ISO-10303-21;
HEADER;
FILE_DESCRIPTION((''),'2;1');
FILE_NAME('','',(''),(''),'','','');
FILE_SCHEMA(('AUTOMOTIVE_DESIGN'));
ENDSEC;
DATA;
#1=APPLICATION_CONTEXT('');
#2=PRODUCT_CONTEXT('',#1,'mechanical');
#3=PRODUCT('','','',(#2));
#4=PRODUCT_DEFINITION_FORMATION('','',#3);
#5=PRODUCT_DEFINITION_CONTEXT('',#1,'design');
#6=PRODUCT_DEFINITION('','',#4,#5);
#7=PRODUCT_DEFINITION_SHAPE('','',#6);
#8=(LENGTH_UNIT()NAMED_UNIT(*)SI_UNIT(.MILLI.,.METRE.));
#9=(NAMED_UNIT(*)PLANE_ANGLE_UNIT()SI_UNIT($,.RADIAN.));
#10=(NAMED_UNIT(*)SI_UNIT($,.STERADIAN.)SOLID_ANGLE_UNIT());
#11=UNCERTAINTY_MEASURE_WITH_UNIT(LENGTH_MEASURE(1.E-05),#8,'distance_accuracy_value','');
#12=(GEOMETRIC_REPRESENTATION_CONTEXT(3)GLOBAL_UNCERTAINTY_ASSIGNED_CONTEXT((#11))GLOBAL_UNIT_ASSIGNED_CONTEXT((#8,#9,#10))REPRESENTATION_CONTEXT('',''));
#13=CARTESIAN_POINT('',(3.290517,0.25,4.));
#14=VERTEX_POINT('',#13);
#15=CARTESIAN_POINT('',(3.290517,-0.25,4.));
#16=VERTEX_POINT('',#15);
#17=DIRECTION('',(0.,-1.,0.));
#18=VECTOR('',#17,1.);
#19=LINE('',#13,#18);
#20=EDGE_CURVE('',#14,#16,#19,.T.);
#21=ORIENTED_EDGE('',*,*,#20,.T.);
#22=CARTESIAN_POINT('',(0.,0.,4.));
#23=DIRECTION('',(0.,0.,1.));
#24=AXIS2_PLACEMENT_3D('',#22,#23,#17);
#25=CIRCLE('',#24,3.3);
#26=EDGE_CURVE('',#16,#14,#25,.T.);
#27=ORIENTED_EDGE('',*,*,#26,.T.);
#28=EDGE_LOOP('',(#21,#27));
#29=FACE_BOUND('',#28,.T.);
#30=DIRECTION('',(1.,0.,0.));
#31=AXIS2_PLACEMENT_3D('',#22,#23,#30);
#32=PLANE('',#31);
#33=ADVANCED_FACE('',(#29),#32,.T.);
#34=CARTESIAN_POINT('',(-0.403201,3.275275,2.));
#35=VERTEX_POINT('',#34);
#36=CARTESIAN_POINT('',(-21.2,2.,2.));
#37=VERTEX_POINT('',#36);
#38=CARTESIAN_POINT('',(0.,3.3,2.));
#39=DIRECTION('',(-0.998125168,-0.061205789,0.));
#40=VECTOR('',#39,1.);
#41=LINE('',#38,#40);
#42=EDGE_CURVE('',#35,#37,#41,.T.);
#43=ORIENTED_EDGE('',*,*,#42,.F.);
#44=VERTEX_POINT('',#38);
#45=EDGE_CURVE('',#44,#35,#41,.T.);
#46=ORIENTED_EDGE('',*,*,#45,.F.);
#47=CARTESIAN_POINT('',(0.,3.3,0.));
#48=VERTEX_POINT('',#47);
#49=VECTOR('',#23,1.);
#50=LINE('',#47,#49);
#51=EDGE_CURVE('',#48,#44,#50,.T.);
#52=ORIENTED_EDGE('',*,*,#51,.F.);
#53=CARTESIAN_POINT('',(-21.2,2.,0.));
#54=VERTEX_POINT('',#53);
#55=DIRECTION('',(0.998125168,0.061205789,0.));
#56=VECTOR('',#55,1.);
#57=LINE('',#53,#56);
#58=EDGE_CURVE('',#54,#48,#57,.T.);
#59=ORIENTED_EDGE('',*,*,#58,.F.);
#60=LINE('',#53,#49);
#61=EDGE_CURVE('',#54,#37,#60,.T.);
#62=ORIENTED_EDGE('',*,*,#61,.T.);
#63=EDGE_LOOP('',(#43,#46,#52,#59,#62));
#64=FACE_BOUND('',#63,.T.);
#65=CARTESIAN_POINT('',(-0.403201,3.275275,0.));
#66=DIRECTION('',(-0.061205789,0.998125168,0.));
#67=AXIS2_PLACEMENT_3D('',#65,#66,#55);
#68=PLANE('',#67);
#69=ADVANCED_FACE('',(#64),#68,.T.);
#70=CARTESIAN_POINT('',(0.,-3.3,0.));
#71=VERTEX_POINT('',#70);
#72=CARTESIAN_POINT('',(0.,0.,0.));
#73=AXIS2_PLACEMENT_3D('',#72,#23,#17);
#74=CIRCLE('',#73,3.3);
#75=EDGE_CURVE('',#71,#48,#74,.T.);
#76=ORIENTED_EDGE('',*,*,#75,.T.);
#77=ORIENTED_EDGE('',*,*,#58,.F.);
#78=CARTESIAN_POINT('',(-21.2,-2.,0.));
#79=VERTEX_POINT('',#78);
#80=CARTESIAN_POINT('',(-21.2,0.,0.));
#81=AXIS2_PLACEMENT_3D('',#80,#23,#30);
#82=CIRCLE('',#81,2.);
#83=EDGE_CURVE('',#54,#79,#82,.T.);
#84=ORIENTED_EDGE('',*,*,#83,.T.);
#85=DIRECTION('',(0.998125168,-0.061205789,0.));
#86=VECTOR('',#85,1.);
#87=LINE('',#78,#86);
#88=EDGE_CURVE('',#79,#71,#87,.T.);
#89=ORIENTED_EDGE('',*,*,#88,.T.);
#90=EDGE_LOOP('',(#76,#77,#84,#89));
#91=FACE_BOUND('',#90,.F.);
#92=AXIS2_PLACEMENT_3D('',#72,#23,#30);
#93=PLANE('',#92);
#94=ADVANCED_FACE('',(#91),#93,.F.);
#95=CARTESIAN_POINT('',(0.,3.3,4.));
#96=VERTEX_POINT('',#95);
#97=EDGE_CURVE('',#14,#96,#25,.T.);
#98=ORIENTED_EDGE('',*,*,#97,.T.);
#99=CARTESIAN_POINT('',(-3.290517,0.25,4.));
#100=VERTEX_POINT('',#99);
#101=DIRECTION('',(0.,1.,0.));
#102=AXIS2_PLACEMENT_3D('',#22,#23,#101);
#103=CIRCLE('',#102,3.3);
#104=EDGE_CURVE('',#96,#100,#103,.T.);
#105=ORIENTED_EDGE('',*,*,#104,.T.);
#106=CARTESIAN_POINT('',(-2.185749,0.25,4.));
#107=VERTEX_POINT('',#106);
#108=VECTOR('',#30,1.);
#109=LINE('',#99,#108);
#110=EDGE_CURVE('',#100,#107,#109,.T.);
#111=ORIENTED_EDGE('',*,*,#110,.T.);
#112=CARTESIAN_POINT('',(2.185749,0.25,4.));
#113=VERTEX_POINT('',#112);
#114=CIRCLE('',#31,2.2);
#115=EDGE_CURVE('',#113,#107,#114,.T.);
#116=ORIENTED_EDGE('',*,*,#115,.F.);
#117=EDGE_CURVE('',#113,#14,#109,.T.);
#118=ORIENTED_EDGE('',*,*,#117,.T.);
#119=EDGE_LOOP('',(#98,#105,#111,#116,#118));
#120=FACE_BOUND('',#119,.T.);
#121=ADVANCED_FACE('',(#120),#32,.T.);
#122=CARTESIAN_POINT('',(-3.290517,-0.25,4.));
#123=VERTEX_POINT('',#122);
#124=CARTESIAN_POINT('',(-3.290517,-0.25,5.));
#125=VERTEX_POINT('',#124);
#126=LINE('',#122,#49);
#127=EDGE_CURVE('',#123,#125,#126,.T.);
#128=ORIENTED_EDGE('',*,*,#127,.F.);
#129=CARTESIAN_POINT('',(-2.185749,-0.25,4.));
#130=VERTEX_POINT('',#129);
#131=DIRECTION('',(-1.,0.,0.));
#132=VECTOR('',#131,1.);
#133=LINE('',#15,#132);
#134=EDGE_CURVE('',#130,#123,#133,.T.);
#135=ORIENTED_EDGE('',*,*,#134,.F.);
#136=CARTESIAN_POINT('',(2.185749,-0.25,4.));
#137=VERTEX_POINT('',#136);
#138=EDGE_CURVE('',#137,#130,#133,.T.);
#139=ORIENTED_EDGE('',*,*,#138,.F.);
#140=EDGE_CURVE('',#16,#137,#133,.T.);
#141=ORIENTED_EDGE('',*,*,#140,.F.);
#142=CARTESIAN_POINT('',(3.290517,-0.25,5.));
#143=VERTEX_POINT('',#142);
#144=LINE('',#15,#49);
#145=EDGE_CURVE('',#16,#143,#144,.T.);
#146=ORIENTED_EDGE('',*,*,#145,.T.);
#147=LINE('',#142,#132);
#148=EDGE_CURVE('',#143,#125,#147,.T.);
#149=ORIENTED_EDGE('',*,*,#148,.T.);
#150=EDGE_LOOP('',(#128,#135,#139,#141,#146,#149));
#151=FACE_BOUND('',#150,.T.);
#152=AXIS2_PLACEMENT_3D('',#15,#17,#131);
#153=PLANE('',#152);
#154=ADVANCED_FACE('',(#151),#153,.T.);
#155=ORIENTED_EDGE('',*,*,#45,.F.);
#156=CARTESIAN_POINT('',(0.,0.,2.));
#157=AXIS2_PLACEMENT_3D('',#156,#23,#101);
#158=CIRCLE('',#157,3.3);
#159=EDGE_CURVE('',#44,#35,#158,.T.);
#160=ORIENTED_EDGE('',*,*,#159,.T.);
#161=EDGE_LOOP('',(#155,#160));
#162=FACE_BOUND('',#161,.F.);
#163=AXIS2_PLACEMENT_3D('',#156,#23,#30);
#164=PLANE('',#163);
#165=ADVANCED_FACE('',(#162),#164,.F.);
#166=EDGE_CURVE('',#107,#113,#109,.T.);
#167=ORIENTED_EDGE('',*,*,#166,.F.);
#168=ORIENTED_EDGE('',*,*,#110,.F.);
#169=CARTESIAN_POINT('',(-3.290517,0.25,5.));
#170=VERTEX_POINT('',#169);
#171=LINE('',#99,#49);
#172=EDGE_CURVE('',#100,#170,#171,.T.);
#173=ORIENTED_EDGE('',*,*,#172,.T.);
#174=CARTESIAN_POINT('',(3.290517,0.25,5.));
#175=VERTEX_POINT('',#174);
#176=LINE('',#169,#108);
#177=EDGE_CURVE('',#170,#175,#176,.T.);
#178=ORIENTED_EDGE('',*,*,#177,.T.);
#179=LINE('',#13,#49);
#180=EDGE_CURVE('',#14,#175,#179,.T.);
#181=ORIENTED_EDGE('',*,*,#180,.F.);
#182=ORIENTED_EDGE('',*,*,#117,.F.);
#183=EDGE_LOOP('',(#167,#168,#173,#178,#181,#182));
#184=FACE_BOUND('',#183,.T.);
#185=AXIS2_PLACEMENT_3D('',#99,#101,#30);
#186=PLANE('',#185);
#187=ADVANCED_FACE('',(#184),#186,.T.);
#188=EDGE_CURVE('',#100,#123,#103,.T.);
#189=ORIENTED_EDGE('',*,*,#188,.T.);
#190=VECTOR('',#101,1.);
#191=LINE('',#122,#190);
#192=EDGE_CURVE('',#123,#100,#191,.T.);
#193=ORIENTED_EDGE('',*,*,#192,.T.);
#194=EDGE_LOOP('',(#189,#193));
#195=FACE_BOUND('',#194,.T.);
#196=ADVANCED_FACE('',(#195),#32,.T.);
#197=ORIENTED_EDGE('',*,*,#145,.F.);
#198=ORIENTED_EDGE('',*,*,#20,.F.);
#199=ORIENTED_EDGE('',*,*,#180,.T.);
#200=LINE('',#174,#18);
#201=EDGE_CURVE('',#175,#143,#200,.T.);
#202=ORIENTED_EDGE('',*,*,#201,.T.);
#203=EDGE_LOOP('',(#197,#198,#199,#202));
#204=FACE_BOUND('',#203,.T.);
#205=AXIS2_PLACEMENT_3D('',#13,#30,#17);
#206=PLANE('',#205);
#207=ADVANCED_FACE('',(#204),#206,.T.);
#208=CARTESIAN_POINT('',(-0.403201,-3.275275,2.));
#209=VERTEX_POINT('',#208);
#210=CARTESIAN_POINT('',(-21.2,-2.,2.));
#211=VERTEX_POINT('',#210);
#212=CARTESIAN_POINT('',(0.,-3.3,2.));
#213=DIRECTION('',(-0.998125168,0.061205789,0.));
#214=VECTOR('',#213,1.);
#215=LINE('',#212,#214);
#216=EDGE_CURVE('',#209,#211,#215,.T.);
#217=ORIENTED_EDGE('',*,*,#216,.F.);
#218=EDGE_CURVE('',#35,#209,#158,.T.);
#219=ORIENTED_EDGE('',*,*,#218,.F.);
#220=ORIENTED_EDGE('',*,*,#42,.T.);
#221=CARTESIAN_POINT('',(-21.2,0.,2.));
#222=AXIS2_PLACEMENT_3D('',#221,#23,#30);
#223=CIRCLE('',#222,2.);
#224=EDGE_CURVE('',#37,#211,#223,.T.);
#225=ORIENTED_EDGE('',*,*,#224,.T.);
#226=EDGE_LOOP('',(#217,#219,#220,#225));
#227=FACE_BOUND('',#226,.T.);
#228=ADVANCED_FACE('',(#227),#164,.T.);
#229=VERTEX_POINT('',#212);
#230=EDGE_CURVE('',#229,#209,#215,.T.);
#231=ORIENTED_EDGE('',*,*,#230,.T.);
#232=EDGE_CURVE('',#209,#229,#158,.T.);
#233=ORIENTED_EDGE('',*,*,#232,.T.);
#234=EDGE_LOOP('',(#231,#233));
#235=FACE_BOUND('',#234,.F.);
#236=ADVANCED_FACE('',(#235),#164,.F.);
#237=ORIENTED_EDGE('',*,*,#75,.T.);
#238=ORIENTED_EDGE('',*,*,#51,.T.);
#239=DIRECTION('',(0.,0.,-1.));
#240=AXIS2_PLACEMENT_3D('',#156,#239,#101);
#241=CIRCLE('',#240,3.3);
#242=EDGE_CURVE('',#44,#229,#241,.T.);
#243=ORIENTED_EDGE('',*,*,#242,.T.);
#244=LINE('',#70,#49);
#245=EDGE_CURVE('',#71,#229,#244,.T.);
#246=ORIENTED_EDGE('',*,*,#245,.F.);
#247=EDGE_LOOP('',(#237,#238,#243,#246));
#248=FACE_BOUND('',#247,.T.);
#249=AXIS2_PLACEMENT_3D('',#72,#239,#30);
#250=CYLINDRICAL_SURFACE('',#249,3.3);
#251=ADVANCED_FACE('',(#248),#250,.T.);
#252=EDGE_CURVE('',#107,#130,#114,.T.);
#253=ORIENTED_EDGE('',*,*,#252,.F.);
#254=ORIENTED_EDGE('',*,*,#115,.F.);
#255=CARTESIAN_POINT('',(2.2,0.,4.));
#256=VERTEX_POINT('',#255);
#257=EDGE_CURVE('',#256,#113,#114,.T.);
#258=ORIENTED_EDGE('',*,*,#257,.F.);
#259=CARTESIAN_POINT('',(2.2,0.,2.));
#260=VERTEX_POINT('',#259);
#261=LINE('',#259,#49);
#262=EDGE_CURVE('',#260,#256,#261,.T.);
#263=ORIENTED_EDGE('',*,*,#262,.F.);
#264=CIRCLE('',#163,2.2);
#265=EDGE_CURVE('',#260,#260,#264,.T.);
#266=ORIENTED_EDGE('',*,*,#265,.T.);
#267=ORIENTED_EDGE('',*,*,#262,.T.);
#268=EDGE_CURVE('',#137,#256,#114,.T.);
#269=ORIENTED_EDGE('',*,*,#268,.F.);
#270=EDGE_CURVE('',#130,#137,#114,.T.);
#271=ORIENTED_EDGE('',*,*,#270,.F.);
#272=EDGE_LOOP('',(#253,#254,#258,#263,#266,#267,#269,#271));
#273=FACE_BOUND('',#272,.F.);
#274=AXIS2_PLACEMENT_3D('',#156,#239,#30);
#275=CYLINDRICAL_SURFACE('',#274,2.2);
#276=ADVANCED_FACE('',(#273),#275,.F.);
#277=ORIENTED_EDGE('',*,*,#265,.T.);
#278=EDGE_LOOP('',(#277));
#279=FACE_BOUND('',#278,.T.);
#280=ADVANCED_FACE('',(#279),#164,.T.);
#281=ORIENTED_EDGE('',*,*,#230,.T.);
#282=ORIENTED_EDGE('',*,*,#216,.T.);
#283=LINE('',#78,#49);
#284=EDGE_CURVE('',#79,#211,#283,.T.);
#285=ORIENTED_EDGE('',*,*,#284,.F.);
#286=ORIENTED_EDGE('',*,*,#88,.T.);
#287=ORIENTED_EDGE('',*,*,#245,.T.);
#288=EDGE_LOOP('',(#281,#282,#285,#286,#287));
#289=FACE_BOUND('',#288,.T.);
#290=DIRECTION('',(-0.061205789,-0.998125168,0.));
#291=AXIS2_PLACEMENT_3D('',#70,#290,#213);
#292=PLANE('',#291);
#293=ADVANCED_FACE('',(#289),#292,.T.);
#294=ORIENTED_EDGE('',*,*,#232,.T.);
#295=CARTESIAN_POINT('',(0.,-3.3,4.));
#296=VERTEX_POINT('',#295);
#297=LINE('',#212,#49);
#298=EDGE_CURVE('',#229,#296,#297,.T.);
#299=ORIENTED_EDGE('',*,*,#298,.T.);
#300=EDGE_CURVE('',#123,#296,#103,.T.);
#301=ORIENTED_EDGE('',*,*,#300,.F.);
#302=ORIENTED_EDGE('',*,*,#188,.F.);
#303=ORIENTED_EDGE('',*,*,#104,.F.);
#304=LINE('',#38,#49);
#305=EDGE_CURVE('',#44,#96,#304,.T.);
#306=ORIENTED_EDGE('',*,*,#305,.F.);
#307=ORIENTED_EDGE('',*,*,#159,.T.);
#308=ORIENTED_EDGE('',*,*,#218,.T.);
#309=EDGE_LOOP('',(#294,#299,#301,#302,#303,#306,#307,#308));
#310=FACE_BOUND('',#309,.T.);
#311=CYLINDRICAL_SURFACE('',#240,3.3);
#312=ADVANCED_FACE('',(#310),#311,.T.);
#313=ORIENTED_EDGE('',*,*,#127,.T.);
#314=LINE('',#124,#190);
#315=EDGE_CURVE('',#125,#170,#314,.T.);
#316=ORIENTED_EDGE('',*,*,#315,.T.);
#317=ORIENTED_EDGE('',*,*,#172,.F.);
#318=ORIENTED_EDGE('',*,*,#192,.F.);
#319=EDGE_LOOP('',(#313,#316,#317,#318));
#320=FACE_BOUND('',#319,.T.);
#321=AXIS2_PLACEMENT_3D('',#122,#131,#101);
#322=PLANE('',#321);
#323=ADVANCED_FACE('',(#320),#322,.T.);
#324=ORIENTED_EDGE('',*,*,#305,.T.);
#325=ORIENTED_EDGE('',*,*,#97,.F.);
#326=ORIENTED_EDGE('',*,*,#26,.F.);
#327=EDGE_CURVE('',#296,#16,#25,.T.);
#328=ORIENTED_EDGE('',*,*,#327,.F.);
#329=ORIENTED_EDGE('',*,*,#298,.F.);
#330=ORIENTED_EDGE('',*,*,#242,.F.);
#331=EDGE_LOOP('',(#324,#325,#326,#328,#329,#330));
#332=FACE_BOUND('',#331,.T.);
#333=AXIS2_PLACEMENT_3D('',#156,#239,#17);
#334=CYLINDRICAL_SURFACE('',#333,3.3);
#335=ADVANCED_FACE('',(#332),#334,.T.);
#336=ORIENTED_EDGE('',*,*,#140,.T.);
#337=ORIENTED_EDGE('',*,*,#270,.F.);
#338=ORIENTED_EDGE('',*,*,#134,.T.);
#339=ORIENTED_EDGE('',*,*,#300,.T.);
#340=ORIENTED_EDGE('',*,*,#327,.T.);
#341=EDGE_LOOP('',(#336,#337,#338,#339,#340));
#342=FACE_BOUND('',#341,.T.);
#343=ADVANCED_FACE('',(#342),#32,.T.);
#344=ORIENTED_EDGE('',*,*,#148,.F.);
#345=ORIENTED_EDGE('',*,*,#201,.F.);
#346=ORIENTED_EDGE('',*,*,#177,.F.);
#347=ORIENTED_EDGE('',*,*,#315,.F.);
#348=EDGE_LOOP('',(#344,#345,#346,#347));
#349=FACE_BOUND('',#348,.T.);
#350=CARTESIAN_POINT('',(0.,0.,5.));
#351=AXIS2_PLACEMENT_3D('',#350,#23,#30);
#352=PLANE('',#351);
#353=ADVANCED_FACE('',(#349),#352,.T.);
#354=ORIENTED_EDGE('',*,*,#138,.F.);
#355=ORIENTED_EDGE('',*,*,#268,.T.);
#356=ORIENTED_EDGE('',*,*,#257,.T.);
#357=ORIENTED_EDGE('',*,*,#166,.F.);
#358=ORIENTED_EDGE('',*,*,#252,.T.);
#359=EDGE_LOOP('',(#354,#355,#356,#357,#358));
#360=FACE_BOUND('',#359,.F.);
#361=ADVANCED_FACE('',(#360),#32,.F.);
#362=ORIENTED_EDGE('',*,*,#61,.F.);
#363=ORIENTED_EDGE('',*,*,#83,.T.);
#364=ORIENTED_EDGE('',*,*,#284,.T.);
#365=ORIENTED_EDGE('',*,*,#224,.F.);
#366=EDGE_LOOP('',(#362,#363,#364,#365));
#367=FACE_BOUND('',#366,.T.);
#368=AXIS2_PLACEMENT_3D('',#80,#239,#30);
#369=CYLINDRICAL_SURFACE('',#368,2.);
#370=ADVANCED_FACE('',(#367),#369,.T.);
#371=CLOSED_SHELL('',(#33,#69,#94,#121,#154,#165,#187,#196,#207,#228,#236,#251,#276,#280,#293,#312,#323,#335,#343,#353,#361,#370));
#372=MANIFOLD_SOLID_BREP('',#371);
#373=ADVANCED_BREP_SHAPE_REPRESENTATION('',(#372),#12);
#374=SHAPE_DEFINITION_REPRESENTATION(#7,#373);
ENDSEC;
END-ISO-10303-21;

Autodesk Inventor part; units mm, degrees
ref_plane "YZ Plane" through (0, 0, 0) normal (1, 0, 0) x (0, 1, 0)
ref_plane "XZ Plane" through (0, 0, 0) normal (0, 1, 0) x (-1, 0, 0)
ref_plane "XY Plane" through (0, 0, 0) normal (0, 0, 1) x (1, 0, 0)
sketch "Sketch1" plane through (0, 0, 0) normal (0, 0, 1) x (1, 0, 0)
  circle A0 centre (0, 0) radius 3.3
  circle A1 centre (-21.2, 0) radius 2
  line L0 (-21.2, 2) -> (0, 3.3)
  line L1 (0, -3.3) -> (-21.2, -2)
  dimension "d0" = 6.6
  dimension "d1" = 4
  dimension "d2" = 21.2
extrude "Extrusion1" add sketch "Sketch1" along normal blind 2 contours A0 L1 L0 | A0 L1 A1 L0 | A1
sketch "Sketch2" plane through (0, 0, 2) normal (0, 0, 1) x (1, 0, 0)
  arc A0 (0, -3.3) -> (0, 3.3) centre (0, 0) ccw projected
  circle A1 centre (0, 0) radius 3.3
  circle A2 centre (0, 0) radius 2.2
  dimension "d5" = 4.4
sketch "Sketch2 outline for Extrusion2" plane through (0, 0, 2) normal (0, 0, 1) x (1, 0, 0)
  arc A0 (0, 3.3) -> (0, -3.3) centre (0, 0) ccw
  arc A1 (0, -3.3) -> (0, 3.3) centre (0, 0) ccw
  circle A2 centre (0, 0) radius 2.2
extrude "Extrusion2" add sketch "Sketch2 outline for Extrusion2" along normal blind 2
sketch "Sketch3" plane through (0, 0, 4) normal (0, 0, 1) x (1, 0, 0)
  arc A0 (-0.403201, 3.275275) -> (-0.403201, -3.275275) centre (0, 0) ccw
  arc A1 (0, -3.3) -> (0, 3.3) centre (0, 0) ccw
  line L0 (-3.290517, 0.25) -> (3.290517, 0.25)
  line L1 (3.290517, 0.25) -> (3.290517, -0.25)
  line L2 (3.290517, -0.25) -> (-3.290517, -0.25)
  line L3 (-3.290517, -0.25) -> (-3.290517, 0.25)
  dimension "d8" = 0.25
  dimension "d9" = 0.25
extrude "Extrusion3" add sketch "Sketch3" along normal blind 1 contours L0 L1 L2 L3
properties part number "servo-swap"
